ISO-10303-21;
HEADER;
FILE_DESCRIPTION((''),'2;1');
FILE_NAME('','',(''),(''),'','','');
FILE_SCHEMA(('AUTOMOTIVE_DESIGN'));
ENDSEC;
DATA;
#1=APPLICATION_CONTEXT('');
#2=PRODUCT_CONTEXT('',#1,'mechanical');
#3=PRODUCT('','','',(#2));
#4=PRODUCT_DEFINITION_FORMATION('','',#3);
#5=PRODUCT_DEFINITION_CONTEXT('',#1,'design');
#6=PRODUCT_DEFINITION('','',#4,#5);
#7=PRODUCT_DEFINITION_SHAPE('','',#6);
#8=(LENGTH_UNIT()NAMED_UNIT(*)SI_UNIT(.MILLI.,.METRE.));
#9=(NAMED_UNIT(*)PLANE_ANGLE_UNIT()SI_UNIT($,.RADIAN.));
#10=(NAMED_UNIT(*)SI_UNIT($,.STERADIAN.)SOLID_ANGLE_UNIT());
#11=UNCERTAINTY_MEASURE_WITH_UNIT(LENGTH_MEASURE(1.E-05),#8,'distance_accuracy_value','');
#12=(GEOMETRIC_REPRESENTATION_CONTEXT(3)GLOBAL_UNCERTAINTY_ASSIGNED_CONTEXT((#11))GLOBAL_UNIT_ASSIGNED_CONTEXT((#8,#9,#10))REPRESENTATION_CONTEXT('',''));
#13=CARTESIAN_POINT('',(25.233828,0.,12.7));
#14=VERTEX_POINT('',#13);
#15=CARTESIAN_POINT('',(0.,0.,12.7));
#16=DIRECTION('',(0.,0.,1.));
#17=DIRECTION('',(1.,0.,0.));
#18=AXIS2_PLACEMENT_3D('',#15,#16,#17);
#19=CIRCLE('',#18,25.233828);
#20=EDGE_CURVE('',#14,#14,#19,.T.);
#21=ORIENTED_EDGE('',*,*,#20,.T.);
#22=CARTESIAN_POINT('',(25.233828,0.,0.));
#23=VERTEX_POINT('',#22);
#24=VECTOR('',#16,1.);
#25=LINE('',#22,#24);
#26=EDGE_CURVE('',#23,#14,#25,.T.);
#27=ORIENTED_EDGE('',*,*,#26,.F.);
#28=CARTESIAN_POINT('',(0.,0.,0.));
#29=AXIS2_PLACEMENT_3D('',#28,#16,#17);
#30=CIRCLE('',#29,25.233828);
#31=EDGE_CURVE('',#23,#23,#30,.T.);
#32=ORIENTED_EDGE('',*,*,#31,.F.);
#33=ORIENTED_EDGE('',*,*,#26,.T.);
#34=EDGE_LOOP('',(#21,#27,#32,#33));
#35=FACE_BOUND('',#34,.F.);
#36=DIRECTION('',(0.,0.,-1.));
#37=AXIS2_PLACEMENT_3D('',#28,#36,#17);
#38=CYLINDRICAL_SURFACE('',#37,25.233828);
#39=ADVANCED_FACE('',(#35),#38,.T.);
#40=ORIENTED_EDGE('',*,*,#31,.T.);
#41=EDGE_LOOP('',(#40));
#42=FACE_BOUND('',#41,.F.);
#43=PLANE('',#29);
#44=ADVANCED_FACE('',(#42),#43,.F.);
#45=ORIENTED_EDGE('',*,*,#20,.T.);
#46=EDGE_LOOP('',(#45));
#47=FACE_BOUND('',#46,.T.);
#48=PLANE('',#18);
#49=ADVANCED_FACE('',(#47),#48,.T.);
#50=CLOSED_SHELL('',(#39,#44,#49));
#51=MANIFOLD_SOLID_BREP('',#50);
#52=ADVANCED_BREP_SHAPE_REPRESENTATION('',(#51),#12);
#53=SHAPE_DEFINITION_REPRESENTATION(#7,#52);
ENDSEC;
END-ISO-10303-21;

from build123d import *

# Parameters (mm, degrees)
F0_R     = 25.2338276839
F1_DEPTH = 12.7


# Not quite as in the source:
# - a length typed as a fraction of an inch, garbled in the dataset ("3 / 203.2 mm" for 3/8 in), is restored


with BuildPart() as f1:
    # F0 (on Top) → F1 (new body)
    with BuildSketch(Plane.XY):
        Circle(F0_R)
    extrude(amount=F1_DEPTH)


solid = f1.part
